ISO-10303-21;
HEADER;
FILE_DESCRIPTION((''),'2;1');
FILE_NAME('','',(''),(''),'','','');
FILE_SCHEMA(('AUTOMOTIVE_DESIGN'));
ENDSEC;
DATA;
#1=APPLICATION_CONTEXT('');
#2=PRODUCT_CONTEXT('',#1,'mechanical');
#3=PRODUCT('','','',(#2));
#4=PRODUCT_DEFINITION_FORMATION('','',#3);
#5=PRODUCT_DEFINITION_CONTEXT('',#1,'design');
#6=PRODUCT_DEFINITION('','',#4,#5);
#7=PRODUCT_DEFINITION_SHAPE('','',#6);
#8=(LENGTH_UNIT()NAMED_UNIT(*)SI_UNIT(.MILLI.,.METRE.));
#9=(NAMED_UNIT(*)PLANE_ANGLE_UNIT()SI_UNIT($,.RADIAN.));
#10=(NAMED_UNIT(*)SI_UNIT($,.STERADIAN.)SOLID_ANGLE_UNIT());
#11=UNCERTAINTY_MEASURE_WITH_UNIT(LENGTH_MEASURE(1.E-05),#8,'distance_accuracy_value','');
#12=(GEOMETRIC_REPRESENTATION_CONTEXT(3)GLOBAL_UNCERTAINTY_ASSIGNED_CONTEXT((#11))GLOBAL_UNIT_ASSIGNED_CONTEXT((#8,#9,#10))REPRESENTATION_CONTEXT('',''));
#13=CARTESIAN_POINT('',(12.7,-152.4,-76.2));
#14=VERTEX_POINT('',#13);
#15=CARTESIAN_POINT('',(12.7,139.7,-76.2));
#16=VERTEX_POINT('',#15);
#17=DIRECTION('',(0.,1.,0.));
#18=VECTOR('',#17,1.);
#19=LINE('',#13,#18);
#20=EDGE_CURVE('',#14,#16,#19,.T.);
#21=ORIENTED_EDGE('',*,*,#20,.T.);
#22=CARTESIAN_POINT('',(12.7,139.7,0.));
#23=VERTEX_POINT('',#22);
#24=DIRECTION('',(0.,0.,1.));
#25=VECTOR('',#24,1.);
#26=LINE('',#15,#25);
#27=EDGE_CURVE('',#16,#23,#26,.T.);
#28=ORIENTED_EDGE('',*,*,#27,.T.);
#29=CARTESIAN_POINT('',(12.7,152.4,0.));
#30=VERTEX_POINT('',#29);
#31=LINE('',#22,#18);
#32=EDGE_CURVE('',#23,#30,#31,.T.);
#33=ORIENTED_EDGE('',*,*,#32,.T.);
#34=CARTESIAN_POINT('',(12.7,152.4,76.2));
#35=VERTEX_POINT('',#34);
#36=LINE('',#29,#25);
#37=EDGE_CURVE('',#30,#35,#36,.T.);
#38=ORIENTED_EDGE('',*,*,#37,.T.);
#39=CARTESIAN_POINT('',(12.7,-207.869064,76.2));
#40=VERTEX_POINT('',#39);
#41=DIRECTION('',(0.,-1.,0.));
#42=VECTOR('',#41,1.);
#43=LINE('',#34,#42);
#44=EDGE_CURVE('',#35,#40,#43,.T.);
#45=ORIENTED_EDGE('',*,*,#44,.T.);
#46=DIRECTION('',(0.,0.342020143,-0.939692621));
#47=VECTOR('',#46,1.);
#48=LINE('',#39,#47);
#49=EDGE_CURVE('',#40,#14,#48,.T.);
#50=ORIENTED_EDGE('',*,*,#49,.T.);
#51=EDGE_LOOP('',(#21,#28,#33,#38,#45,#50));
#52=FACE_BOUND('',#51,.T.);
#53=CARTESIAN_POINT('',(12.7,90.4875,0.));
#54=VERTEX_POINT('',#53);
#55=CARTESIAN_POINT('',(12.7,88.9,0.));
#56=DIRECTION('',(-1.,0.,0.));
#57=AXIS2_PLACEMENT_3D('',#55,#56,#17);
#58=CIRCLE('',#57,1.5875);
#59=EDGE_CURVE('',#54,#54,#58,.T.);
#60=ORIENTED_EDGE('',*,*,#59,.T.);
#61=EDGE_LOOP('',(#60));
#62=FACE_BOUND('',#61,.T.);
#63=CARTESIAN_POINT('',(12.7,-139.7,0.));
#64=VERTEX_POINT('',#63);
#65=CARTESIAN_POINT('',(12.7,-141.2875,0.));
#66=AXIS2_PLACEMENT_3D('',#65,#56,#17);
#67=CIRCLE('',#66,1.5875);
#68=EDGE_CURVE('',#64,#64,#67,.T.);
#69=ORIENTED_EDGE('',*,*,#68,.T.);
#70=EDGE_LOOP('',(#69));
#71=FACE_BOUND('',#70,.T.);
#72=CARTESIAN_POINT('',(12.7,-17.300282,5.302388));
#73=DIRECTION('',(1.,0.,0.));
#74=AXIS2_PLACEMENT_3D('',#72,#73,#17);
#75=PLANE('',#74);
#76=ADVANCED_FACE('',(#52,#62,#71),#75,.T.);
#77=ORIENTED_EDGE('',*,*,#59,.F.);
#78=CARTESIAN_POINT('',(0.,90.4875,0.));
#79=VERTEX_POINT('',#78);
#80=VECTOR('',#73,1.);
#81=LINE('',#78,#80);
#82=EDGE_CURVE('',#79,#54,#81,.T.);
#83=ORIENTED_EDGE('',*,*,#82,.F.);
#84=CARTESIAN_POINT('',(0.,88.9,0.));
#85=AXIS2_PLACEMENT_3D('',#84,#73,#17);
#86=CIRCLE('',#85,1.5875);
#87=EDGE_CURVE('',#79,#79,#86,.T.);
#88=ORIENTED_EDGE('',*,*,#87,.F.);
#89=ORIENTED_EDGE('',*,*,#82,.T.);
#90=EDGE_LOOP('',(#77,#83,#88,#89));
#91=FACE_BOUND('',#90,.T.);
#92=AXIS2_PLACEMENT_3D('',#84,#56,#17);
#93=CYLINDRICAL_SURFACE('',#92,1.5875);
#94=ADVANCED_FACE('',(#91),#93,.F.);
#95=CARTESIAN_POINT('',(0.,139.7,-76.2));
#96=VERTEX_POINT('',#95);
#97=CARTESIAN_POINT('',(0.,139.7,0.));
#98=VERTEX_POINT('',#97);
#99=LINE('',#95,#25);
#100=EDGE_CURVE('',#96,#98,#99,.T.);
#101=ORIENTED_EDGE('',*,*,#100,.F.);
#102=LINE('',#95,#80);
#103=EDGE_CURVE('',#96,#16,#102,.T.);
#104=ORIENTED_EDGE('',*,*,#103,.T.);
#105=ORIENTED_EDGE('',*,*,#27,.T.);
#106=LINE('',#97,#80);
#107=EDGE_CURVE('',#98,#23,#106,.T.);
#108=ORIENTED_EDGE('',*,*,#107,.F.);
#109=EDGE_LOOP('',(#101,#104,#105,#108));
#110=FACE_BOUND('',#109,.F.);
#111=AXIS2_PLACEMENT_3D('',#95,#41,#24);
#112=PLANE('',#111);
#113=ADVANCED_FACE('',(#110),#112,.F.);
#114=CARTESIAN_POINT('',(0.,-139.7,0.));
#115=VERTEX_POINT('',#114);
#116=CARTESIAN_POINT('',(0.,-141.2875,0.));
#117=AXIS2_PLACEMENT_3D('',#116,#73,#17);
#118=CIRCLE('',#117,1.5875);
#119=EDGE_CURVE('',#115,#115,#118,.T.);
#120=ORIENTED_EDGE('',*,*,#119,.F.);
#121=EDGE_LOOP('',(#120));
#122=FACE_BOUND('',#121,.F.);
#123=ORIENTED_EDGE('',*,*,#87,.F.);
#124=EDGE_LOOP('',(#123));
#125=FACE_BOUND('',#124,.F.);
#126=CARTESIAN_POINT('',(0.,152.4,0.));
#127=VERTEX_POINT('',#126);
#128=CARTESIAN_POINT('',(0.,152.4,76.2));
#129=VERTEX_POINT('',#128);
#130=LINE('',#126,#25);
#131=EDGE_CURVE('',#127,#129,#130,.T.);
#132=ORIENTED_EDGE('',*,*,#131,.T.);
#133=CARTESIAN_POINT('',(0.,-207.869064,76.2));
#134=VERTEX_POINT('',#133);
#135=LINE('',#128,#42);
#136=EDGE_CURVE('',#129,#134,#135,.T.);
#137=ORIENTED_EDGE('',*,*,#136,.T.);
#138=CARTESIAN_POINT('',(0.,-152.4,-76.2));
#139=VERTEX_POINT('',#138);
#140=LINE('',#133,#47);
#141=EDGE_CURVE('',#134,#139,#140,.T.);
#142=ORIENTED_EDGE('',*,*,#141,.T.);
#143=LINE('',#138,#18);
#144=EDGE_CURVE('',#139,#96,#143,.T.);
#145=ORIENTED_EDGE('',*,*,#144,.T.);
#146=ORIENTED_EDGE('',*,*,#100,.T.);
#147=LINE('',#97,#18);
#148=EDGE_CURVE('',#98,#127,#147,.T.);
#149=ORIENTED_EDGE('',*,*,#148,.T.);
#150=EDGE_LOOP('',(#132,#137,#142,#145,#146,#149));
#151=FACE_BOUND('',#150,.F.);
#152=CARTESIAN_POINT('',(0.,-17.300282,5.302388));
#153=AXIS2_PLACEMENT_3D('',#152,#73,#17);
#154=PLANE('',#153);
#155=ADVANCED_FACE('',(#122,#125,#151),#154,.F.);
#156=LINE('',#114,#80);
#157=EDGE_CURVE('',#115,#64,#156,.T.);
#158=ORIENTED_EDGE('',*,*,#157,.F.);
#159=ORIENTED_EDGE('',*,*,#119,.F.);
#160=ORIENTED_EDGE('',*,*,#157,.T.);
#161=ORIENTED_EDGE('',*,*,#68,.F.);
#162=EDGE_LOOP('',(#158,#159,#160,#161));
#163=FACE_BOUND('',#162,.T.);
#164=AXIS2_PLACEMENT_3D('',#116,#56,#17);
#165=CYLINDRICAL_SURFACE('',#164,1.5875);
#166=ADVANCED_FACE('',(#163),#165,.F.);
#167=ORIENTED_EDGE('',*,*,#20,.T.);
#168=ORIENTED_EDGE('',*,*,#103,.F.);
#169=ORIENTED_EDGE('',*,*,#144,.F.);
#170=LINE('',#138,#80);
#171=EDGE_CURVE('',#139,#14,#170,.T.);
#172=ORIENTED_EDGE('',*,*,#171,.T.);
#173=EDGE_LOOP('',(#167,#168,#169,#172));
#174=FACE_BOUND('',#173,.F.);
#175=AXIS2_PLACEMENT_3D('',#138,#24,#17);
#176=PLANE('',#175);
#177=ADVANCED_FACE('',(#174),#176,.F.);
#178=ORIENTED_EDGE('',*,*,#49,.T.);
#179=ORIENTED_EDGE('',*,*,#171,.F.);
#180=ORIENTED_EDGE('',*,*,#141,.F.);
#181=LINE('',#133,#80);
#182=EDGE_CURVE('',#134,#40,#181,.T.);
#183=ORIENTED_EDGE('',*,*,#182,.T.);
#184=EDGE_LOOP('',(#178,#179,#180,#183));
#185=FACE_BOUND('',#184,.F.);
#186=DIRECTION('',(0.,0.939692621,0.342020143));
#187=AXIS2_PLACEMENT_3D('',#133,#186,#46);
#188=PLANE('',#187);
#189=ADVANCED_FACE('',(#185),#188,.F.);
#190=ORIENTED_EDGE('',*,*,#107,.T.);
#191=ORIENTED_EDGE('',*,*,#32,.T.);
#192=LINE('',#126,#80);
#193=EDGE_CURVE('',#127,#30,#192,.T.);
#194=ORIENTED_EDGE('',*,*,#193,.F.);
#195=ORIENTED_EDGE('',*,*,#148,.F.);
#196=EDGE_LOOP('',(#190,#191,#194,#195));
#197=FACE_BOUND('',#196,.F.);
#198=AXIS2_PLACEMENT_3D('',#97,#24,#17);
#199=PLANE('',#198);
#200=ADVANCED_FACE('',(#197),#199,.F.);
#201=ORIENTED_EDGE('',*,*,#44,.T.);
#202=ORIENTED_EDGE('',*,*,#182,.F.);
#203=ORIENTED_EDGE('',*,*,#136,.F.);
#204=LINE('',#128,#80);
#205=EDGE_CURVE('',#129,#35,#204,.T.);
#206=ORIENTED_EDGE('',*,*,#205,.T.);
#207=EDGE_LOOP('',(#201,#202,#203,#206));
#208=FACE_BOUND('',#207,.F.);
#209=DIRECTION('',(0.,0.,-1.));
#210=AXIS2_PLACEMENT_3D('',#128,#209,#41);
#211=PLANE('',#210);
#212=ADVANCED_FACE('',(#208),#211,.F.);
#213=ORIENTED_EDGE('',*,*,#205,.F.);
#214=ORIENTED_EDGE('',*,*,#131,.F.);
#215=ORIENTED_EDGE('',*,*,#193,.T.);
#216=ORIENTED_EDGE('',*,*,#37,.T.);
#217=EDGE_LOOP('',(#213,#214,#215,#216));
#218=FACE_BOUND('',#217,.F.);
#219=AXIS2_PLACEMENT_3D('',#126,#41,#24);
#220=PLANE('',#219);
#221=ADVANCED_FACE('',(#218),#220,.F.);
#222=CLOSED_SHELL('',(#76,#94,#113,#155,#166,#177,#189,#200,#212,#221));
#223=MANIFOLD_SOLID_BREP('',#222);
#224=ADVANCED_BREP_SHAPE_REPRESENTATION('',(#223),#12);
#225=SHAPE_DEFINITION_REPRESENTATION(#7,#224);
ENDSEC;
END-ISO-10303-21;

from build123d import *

# Parameters (mm, degrees)
F2_DEPTH = 12.7
F3_R     = 1.5875
F4_DEPTH = 12.701


# Not quite as in the source:
# - a feature names something its author has since deleted; it is built from what else it names


with BuildPart() as f2:
    # F1 (on face) → F2 (new body)
    with BuildSketch(Plane.YZ):
        Polygon((-152.4, -76.2), (139.7, -76.2), (139.7, 0), (152.4, 0), (152.4, 76.2), (-152.4, 76.2), (-207.8690637022, 76.2), align=None)
    extrude(amount=F2_DEPTH)

    # F3 (on face) → F4 (cut, through all)
    with BuildSketch(Plane.YZ):
        with Locations((-141.2875, 0)):
            Circle(F3_R)
        with Locations((88.9, 0)):
            Circle(F3_R)
    extrude(amount=F4_DEPTH, mode=Mode.SUBTRACT)


solid = f2.part
